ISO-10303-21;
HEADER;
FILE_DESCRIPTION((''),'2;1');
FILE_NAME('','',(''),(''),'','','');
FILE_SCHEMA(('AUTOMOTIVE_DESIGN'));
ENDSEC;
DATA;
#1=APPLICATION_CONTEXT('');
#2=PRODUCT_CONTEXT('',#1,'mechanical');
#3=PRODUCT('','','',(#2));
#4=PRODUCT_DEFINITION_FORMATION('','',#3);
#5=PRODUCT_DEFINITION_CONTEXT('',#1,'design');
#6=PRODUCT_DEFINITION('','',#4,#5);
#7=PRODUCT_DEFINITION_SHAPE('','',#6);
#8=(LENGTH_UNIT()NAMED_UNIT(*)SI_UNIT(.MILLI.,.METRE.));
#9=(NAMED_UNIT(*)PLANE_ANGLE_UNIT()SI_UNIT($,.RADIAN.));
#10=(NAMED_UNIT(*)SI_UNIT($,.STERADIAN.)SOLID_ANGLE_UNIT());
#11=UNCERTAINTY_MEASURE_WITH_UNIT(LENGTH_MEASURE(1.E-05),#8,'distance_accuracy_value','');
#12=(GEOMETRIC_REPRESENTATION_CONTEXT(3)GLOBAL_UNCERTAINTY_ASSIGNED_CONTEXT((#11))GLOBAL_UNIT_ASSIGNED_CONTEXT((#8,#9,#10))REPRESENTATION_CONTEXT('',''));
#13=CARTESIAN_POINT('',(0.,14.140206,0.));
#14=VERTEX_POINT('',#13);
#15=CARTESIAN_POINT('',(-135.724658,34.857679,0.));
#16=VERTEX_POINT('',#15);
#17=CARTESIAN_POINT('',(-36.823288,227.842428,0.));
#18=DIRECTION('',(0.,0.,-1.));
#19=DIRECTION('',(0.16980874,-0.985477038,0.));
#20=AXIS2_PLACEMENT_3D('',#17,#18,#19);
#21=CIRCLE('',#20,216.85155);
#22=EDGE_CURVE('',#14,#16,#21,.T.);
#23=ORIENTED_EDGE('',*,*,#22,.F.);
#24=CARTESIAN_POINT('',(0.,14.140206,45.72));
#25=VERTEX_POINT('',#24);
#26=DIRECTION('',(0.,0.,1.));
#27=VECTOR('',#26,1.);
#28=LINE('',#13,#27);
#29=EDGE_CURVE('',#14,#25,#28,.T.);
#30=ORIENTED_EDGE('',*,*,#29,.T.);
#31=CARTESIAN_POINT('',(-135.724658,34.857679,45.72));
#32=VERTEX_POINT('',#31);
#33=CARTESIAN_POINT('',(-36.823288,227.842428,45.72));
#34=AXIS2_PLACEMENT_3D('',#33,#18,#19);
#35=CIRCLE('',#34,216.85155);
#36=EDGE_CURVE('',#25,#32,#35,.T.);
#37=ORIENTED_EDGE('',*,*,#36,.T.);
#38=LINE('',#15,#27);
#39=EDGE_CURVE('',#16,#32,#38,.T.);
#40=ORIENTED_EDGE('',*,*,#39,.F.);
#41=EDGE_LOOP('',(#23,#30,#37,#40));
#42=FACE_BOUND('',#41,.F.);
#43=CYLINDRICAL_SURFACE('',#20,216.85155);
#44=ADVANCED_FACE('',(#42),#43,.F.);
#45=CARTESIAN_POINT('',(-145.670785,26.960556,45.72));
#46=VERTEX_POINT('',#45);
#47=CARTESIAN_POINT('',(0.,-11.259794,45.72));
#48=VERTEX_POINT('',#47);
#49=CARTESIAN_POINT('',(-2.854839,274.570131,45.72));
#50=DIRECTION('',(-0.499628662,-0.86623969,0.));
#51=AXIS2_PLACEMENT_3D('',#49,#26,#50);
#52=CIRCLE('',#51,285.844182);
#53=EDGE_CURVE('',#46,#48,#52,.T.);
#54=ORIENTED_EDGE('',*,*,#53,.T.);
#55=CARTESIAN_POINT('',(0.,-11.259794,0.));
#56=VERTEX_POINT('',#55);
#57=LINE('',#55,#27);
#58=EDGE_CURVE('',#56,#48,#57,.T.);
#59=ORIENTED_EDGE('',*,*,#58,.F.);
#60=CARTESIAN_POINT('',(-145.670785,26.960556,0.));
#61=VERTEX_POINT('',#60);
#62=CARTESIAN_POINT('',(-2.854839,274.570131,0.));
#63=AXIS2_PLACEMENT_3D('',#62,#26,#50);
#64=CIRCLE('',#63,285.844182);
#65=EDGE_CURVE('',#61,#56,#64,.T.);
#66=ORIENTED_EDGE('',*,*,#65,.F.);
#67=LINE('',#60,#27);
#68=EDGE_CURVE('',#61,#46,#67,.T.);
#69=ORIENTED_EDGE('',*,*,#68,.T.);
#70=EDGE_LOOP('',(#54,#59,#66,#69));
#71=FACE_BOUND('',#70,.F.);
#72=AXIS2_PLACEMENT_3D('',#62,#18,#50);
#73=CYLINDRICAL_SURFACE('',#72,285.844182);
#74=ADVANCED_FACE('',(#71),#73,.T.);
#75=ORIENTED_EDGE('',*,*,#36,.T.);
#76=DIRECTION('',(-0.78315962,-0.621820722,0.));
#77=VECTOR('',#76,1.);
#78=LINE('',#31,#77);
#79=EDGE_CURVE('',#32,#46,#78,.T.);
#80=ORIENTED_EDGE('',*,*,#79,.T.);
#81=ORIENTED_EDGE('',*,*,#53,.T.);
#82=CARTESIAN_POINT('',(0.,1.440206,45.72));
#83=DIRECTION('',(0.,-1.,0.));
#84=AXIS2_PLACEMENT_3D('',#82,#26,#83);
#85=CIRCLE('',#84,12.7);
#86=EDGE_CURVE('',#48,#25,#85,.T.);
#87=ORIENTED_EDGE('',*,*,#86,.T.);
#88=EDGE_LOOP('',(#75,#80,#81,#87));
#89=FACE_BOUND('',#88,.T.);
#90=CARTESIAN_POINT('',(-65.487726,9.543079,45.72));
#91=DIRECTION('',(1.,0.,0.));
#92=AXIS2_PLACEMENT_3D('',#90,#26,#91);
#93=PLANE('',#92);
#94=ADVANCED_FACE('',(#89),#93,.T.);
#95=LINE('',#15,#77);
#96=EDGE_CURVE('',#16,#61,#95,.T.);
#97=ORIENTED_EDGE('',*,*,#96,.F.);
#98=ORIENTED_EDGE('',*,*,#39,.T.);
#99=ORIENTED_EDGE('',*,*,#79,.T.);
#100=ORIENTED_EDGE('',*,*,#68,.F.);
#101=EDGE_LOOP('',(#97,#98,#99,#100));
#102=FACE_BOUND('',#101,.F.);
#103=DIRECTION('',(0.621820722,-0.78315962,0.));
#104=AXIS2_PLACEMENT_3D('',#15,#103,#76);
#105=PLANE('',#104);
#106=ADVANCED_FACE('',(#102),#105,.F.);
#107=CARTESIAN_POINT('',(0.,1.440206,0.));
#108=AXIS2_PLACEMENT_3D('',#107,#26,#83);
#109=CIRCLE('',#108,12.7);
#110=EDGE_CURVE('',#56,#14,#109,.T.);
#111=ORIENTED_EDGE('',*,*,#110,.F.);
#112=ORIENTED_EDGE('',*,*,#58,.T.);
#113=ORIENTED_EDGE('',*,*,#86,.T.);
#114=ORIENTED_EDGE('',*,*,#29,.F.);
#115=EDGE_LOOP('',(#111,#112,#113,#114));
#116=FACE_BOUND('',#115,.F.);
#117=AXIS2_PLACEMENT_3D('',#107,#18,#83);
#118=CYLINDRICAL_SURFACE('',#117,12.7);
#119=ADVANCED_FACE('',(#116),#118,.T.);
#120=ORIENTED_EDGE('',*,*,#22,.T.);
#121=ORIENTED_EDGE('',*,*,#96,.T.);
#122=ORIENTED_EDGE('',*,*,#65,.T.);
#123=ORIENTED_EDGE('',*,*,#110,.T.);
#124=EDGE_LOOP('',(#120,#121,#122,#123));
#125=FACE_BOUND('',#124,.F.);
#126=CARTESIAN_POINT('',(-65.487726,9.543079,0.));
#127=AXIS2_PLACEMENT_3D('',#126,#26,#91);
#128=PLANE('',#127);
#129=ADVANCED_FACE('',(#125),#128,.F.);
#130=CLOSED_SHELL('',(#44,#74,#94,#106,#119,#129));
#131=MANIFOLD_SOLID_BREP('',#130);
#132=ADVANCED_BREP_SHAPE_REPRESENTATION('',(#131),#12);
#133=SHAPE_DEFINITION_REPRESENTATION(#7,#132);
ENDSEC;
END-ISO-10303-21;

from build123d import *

# Parameters (mm, degrees)
F1_DEPTH = 45.72


# Not quite as in the source:
# - a feature of the source that left no trace in its solid (it failed there, or was rolled back) is left out


with BuildPart() as f1:
    # F0 (on Top) → F1 (new body)
    with BuildSketch(Plane.XY):
        with BuildLine():
            ThreePointArc((-145.6707853291, 26.9605556957), (-75.3977689013, -1.915708772), (0, -11.2597941826))
            ThreePointArc((0, -11.2597941826), (12.7, 1.4402058174), (0, 14.1402058174))
            ThreePointArc((0, 14.1402058174), (-69.5452300972, 13.4738928601), (-135.7246581581, 34.8576788616))
            Line((-135.7246581581, 34.8576788616), (-145.6707853291, 26.9605556957))
        make_face()
    extrude(amount=F1_DEPTH)


solid = f1.part
